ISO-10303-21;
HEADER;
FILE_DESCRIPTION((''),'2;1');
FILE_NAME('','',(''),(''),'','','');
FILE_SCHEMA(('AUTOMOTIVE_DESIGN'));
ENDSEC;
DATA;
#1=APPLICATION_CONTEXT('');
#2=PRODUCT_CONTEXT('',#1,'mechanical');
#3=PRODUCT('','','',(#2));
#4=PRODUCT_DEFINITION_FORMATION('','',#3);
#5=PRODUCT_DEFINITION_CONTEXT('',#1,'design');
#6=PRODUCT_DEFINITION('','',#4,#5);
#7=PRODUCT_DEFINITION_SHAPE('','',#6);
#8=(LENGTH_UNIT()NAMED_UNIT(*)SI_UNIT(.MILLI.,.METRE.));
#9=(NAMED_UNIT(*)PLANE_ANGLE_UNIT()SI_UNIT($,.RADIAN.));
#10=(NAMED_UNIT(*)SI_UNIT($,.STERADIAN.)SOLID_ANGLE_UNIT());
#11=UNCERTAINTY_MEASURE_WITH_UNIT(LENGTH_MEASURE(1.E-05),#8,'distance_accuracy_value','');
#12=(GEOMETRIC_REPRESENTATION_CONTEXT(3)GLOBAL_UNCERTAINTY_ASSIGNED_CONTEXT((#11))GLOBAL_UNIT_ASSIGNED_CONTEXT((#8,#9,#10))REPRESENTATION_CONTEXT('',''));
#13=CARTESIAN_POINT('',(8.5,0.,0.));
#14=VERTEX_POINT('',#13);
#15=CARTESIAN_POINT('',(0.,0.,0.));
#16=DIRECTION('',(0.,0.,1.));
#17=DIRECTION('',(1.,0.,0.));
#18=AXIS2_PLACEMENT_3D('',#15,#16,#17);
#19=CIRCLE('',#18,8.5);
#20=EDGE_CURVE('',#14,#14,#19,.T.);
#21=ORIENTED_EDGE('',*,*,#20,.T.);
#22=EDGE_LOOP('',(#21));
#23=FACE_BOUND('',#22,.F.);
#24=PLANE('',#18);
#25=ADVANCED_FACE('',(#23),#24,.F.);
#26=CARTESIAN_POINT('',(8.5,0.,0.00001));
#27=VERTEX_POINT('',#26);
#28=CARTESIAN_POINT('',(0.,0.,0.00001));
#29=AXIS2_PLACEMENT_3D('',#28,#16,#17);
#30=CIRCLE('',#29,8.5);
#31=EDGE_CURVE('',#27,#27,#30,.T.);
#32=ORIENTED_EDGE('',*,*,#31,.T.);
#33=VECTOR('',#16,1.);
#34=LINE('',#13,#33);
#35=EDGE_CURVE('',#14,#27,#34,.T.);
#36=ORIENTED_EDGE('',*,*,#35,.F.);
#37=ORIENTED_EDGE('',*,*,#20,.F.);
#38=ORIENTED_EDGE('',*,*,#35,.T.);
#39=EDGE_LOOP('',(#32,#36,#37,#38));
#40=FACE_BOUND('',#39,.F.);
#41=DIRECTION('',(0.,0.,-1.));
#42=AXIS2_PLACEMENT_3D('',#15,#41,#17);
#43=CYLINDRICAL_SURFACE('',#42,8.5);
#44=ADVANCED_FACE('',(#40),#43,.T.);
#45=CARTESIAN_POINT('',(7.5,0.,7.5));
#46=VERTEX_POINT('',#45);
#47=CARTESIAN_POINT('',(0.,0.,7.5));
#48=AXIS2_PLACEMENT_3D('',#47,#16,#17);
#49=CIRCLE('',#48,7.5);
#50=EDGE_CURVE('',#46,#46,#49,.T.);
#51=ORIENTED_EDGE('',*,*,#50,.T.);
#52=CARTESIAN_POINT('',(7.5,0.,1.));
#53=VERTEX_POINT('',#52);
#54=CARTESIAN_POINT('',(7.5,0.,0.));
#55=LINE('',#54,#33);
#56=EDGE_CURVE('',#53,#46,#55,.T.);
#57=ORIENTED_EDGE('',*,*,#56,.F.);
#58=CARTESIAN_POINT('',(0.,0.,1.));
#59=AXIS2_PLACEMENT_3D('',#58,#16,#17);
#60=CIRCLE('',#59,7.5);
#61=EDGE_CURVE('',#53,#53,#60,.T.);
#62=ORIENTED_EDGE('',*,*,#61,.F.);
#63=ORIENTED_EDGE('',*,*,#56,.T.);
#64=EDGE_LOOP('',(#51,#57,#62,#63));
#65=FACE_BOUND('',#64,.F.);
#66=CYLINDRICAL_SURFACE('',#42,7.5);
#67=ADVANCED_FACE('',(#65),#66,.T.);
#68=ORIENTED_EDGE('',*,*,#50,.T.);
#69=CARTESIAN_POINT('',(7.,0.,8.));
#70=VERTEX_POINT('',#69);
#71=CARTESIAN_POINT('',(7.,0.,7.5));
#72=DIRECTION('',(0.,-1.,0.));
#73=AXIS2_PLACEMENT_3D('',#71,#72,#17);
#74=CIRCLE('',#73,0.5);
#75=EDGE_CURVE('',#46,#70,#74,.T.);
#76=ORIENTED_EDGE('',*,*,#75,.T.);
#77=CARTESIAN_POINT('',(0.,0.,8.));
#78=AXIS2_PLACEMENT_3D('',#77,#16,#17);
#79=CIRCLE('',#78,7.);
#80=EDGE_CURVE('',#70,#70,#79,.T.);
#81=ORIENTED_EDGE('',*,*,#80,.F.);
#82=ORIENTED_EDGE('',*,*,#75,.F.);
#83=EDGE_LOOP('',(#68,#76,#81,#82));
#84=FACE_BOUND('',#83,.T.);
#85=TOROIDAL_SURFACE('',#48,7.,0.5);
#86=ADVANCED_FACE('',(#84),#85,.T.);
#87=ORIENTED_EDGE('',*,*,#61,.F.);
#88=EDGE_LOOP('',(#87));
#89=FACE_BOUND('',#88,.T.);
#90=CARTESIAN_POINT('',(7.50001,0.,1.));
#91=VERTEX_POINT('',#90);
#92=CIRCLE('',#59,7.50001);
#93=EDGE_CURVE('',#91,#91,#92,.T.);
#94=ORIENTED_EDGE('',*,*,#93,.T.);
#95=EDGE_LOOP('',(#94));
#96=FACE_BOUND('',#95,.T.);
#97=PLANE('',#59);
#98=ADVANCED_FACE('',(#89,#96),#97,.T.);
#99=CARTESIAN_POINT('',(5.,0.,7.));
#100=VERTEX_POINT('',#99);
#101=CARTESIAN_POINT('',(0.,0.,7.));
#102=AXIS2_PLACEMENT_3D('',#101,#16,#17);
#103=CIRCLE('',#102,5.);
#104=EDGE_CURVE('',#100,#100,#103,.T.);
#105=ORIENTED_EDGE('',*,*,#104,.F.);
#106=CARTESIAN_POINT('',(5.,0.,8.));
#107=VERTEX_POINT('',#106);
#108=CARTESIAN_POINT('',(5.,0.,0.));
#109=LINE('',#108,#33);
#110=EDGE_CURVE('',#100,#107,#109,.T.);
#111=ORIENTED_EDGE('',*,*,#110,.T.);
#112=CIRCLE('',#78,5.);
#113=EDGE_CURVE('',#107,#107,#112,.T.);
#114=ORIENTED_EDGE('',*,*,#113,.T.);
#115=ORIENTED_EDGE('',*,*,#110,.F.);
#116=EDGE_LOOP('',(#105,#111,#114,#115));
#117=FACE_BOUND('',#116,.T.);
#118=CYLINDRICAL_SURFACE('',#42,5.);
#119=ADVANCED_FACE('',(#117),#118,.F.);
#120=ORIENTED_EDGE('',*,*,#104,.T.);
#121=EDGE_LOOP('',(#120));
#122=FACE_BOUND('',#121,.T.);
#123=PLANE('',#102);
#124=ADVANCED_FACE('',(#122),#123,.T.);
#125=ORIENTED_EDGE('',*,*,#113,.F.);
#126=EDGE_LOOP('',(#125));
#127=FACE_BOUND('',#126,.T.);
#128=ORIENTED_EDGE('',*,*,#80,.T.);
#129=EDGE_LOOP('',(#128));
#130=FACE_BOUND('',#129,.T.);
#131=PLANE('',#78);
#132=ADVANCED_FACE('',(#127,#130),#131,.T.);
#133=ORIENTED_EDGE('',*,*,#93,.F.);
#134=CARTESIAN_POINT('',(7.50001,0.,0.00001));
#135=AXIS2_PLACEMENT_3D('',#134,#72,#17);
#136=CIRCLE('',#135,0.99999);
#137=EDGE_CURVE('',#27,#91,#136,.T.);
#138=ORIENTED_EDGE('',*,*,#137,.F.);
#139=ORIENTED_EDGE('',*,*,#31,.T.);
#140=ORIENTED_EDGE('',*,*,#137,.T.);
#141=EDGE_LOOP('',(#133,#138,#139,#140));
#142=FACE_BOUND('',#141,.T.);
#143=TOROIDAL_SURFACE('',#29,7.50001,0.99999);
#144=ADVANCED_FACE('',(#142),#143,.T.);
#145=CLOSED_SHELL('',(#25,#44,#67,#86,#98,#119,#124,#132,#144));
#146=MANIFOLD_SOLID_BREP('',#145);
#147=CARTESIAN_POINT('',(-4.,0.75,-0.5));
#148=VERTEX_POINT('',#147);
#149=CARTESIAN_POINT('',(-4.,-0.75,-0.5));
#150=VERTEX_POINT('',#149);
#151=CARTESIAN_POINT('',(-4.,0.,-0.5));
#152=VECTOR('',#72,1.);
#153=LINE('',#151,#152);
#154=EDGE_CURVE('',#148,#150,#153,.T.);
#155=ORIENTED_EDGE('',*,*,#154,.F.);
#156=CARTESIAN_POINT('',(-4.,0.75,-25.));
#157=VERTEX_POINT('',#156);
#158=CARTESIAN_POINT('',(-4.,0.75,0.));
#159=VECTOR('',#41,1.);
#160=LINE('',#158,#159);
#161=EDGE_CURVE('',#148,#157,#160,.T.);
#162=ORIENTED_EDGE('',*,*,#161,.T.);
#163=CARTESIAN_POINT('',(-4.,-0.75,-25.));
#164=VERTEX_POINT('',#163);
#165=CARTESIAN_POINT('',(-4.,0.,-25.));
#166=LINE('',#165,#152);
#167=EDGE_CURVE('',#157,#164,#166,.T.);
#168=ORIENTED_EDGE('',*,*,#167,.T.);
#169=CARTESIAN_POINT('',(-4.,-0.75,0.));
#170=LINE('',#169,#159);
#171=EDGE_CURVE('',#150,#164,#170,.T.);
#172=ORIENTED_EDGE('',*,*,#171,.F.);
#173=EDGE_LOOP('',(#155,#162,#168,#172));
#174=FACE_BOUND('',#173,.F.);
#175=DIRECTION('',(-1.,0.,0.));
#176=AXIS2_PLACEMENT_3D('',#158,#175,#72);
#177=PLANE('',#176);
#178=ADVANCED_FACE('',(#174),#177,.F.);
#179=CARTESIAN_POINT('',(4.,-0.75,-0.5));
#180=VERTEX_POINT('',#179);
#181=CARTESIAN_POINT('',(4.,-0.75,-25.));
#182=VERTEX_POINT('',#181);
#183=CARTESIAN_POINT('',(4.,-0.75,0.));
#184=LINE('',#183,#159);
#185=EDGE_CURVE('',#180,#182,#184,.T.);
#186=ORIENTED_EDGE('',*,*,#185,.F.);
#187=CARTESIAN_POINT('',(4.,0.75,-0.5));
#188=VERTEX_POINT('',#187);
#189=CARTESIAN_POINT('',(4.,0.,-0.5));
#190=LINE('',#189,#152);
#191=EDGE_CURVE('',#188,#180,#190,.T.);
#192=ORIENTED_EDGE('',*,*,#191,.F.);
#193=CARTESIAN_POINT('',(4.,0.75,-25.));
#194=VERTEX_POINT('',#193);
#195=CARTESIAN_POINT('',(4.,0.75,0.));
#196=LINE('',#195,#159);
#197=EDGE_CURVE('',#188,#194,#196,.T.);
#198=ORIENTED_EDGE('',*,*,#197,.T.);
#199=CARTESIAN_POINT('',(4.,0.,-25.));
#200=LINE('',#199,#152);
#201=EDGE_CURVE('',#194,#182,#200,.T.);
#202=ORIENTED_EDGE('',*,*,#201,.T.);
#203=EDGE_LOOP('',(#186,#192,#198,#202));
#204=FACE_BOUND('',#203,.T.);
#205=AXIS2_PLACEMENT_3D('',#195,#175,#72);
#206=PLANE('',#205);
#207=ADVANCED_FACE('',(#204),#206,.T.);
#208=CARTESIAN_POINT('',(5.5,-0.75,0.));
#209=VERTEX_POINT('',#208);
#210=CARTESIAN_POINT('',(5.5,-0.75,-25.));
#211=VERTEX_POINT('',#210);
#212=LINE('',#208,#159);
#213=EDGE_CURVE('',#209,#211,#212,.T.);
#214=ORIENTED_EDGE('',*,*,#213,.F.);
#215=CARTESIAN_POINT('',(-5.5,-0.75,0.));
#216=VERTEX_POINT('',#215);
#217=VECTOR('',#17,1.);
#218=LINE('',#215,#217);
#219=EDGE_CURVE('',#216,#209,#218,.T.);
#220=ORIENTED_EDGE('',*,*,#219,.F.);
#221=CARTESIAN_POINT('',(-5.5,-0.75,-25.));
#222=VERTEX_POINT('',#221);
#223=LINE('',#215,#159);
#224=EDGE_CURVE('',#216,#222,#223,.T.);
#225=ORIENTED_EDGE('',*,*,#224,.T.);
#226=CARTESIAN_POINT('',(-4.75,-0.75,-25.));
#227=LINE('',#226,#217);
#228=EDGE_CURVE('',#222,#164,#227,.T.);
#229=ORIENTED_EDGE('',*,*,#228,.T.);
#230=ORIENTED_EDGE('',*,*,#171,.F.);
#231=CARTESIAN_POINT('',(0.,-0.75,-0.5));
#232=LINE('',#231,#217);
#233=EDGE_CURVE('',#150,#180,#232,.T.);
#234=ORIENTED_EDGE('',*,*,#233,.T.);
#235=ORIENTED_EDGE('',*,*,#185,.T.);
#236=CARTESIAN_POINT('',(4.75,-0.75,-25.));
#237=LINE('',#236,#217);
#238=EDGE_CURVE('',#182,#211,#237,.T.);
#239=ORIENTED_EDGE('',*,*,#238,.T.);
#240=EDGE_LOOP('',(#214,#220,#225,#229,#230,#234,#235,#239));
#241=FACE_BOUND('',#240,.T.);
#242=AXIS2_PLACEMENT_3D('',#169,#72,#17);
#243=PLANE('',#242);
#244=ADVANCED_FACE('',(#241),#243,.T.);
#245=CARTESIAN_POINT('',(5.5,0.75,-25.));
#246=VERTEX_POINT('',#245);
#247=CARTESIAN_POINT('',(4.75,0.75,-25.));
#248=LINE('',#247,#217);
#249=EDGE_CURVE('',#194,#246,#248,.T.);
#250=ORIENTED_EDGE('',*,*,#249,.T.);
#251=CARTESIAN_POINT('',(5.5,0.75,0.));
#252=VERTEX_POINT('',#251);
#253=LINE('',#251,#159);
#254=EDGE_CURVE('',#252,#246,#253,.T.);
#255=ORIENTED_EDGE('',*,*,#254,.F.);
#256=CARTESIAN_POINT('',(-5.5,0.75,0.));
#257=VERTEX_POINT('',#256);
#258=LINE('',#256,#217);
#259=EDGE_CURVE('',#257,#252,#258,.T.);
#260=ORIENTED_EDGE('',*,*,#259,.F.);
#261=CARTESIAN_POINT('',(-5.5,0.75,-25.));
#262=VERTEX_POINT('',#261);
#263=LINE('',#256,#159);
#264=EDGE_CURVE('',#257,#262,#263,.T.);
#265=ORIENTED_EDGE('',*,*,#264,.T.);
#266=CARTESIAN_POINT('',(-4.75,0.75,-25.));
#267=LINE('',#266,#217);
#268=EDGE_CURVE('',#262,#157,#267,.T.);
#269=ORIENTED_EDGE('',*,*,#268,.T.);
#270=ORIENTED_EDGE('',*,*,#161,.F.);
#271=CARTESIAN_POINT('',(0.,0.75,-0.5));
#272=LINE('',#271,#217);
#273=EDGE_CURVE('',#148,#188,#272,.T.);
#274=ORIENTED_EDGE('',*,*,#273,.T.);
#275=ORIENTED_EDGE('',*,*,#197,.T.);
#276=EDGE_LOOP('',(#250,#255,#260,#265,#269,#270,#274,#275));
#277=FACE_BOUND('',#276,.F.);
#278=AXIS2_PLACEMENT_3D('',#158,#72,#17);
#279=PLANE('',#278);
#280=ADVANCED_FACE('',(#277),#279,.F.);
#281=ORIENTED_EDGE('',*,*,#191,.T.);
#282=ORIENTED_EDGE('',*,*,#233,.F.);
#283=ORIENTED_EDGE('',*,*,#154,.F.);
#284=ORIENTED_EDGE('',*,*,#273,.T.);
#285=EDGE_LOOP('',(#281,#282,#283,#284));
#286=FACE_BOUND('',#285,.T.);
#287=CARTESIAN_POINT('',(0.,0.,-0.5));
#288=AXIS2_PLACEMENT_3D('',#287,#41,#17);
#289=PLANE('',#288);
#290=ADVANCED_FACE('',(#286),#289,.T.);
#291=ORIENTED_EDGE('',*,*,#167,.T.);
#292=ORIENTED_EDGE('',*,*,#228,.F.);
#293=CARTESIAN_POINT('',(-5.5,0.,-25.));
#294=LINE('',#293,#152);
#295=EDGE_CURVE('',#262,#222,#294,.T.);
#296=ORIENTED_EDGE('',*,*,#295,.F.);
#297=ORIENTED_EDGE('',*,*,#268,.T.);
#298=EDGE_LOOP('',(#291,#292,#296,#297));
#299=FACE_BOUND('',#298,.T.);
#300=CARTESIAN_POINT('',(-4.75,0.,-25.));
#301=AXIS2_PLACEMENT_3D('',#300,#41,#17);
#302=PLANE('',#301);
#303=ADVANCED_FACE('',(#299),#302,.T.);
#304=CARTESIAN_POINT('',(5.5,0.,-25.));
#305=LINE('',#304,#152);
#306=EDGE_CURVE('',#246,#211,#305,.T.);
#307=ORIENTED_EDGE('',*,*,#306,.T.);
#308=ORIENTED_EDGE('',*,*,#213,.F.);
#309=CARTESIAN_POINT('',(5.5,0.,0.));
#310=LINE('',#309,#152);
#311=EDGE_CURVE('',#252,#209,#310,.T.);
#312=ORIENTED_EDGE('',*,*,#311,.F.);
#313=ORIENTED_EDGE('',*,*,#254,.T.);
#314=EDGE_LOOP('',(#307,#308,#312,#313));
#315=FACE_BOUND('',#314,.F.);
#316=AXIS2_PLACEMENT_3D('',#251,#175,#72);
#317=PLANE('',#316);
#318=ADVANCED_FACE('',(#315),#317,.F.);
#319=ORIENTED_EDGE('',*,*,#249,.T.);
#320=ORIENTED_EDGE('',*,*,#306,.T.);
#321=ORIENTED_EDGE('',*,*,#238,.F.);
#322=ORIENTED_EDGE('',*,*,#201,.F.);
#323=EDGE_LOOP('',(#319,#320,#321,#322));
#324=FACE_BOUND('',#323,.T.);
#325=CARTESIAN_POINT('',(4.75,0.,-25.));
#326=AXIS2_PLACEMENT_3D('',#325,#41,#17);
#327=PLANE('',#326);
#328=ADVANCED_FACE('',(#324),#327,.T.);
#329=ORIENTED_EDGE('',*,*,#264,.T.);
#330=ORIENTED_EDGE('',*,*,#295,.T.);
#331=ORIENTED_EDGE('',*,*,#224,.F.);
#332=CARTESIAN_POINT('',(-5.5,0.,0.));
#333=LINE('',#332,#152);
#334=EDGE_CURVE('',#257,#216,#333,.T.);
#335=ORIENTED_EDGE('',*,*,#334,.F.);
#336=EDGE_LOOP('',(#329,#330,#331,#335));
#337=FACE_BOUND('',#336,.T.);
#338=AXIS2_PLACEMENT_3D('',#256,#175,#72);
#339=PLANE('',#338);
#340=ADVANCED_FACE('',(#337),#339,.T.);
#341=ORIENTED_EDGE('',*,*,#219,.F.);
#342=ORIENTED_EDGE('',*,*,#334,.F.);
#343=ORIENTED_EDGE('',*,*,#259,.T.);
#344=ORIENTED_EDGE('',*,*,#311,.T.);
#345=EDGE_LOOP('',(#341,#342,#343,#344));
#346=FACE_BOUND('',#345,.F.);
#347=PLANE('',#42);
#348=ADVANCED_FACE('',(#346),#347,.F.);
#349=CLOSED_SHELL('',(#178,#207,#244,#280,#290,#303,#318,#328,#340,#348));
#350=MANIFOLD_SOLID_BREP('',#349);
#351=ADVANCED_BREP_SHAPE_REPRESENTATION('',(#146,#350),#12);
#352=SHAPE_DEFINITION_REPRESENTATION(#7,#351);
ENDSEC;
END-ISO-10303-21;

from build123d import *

# Parameters (mm, degrees)
F0_R     = 5
F1_DEPTH = 7
F0_R_2   = 7.5
F2_DEPTH = 8
F0_R_3   = 8.5
F3_DEPTH = 1
F4_R     = 0.99999
F5_R     = 0.5
F6_W     = 1.5
F6_H     = 1.5
F7_DEPTH = 25
F6_W_2   = 8
F9_DEPTH = 0.5


# Not quite as in the source:
# - a fillet or chamfer is up to 0.001 mm smaller than in the source, because OpenCascade refuses the exact size


with BuildPart() as f1:
    # F0 (on Top) → F1 (new body)
    with BuildSketch(Plane.XY):
        Circle(F0_R)
    extrude(amount=F1_DEPTH)

    # F0 (on Top) → F2 (join)
    with BuildSketch(Plane.XY):
        Circle(F0_R_2)
        Circle(F0_R, mode=Mode.SUBTRACT)
    extrude(amount=F2_DEPTH)

    # F0 (on Top) → F3 (join)
    with BuildSketch(Plane.XY):
        Circle(F0_R_3)
        Circle(F0_R_2, mode=Mode.SUBTRACT)
    extrude(amount=F3_DEPTH)

    # F4 (radius 1 in the source; OpenCascade refuses exactly that, so slightly less here)
    f4_edges = [f1.edges().sort_by_distance(p)[0] for p in [
        (-8.5, 0, 1),
    ]]
    fillet(f4_edges, radius=F4_R)

    # F5
    f5_edges = [f1.edges().sort_by_distance(p)[0] for p in [
        (-7.5, 0, 8),
    ]]
    fillet(f5_edges, radius=F5_R)


with BuildPart() as f7:
    # F6 (on face) → F7 (new body)
    with BuildSketch(Plane(origin=(0, 0, 0), x_dir=(1, 0, 0), z_dir=(0, 0, -1))):
        with Locations((-4.75, 0)):
            Rectangle(F6_W, F6_H)
    extrude(amount=F7_DEPTH)



with BuildPart() as f7b:
    # F6 (on face) → F7, piece 2 (new body)
    with BuildSketch(Plane(origin=(0, 0, 0), x_dir=(1, 0, 0), z_dir=(0, 0, -1))):
        with Locations((4.75, 0)):
            Rectangle(F6_W, F6_H)
    extrude(amount=F7_DEPTH)


with BuildPart() as f7_1:
    add(f7.part)

    add(f7b.part)  # F9 merges F7b
    # F6 (on face) → F9 (join)
    with BuildSketch(Plane(origin=(0, 0, 0), x_dir=(1, 0, 0), z_dir=(0, 0, -1))):
        Rectangle(F6_W_2, F6_H)
    extrude(amount=F9_DEPTH)


solid = Compound([f1.part, f7_1.part])
